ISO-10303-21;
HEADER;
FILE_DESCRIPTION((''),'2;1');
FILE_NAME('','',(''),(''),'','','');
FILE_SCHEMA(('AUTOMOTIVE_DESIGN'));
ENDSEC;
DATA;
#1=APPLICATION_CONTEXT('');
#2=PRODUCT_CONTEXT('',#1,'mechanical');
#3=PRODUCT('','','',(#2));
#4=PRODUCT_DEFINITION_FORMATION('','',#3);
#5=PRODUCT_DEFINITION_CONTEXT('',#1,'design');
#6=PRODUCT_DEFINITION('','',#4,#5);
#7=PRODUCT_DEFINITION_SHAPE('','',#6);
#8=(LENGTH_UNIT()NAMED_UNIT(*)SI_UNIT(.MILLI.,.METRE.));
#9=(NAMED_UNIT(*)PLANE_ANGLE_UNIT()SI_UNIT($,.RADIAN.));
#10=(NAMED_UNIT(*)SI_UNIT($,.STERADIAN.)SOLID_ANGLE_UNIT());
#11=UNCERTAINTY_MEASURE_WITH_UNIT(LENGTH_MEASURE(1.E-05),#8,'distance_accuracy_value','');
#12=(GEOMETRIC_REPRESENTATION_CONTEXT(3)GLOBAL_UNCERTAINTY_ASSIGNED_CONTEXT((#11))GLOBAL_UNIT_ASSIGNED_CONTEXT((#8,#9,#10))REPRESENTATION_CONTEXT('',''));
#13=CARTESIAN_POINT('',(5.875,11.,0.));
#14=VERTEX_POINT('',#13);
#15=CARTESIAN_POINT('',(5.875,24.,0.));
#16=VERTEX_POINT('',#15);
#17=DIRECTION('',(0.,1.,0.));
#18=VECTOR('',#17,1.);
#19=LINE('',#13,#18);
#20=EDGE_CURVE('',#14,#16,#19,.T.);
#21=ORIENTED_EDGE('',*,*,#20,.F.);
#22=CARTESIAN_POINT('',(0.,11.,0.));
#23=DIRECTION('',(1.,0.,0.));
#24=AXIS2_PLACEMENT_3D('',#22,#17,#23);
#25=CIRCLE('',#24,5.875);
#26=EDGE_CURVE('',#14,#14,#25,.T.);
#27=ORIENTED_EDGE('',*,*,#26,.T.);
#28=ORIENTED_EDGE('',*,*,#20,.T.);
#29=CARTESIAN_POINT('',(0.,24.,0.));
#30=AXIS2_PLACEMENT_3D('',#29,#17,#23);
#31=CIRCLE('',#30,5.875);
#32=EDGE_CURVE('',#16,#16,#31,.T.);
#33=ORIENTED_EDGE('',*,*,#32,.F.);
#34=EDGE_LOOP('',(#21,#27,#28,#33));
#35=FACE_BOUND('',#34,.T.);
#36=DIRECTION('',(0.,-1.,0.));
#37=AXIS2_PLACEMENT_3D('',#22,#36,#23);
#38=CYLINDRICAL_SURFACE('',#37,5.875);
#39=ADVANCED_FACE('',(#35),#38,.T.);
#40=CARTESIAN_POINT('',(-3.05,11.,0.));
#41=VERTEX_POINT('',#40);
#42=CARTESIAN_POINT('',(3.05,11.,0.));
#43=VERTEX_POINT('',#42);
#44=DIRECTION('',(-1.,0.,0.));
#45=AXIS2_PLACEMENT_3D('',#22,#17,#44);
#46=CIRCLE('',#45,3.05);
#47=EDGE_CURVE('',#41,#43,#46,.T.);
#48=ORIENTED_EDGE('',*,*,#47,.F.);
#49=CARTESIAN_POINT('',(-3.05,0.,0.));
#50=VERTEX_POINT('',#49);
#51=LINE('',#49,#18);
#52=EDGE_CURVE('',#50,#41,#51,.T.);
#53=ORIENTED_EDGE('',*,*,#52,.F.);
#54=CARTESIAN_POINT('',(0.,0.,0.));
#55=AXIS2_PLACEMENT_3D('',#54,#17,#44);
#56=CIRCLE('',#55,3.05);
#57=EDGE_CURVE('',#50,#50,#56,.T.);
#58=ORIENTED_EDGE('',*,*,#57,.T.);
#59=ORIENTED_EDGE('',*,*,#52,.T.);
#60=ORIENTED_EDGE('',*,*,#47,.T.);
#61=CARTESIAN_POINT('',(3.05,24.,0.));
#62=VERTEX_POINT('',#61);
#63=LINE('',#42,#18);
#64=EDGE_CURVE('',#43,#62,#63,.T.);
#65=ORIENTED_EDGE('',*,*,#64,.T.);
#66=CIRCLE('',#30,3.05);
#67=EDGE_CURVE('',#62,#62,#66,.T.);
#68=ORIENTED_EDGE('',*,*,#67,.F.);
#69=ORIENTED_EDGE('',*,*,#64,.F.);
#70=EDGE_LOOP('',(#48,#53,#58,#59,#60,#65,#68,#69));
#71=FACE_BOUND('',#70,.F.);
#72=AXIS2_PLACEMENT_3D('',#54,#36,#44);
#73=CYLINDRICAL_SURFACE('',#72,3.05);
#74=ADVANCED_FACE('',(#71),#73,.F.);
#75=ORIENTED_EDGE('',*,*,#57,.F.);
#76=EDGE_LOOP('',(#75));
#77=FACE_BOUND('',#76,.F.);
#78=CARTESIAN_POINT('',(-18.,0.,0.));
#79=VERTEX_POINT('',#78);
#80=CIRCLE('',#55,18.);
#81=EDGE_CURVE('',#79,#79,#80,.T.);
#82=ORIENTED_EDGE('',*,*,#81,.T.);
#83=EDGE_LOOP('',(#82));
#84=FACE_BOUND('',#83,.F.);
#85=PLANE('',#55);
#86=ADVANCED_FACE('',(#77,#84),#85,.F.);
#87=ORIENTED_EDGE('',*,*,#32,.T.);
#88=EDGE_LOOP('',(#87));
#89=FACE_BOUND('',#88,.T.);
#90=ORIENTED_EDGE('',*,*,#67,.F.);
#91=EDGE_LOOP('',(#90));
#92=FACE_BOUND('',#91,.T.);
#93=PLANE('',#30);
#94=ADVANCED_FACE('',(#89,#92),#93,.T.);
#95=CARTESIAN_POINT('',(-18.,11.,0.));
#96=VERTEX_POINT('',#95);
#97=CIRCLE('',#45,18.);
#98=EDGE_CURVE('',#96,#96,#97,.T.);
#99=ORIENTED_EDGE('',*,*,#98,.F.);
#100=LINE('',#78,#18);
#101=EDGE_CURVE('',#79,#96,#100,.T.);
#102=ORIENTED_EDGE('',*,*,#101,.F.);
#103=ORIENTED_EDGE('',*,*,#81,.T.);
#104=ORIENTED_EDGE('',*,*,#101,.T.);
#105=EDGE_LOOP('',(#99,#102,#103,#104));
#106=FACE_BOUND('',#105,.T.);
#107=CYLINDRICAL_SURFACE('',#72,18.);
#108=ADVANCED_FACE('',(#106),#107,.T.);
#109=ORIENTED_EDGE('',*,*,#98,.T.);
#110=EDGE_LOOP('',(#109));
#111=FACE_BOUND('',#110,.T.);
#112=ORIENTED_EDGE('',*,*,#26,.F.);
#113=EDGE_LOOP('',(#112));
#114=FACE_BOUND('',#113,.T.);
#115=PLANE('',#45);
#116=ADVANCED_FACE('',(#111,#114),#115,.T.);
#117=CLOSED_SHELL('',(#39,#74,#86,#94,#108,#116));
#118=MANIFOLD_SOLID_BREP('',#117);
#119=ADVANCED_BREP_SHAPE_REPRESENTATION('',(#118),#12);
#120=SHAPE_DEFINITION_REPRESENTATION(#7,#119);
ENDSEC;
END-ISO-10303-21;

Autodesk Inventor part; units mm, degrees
ref_plane "YZ Plane" through (0, 0, 0) normal (1, 0, 0) x (0, 1, 0)
ref_plane "XZ Plane" through (0, 0, 0) normal (0, 1, 0) x (-1, 0, 0)
ref_plane "XY Plane" through (0, 0, 0) normal (0, 0, 1) x (1, 0, 0)
sketch "Sketch1" plane through (0, 0, 0) normal (0, 1, 0) x (-1, 0, 0)
  circle A0 centre (0, 0) radius 3.05
  circle A1 centre (0, 0) radius 18
  dimension "d0" = 6.1
  dimension "d1" = 36
extrude "Extrusion1" add sketch "Sketch1" along normal blind 11
sketch "Sketch2" plane through (0, 11, 0) normal (0, 1, 0) x (1, 0, 0)
  circle A0 centre (0, 0) radius 3.05
  circle A1 centre (0, 0) radius 5.875
  dimension "d4" = 11.75
extrude "Extrusion2" add sketch "Sketch2" along normal blind 13
properties part number "roller_wheel"
